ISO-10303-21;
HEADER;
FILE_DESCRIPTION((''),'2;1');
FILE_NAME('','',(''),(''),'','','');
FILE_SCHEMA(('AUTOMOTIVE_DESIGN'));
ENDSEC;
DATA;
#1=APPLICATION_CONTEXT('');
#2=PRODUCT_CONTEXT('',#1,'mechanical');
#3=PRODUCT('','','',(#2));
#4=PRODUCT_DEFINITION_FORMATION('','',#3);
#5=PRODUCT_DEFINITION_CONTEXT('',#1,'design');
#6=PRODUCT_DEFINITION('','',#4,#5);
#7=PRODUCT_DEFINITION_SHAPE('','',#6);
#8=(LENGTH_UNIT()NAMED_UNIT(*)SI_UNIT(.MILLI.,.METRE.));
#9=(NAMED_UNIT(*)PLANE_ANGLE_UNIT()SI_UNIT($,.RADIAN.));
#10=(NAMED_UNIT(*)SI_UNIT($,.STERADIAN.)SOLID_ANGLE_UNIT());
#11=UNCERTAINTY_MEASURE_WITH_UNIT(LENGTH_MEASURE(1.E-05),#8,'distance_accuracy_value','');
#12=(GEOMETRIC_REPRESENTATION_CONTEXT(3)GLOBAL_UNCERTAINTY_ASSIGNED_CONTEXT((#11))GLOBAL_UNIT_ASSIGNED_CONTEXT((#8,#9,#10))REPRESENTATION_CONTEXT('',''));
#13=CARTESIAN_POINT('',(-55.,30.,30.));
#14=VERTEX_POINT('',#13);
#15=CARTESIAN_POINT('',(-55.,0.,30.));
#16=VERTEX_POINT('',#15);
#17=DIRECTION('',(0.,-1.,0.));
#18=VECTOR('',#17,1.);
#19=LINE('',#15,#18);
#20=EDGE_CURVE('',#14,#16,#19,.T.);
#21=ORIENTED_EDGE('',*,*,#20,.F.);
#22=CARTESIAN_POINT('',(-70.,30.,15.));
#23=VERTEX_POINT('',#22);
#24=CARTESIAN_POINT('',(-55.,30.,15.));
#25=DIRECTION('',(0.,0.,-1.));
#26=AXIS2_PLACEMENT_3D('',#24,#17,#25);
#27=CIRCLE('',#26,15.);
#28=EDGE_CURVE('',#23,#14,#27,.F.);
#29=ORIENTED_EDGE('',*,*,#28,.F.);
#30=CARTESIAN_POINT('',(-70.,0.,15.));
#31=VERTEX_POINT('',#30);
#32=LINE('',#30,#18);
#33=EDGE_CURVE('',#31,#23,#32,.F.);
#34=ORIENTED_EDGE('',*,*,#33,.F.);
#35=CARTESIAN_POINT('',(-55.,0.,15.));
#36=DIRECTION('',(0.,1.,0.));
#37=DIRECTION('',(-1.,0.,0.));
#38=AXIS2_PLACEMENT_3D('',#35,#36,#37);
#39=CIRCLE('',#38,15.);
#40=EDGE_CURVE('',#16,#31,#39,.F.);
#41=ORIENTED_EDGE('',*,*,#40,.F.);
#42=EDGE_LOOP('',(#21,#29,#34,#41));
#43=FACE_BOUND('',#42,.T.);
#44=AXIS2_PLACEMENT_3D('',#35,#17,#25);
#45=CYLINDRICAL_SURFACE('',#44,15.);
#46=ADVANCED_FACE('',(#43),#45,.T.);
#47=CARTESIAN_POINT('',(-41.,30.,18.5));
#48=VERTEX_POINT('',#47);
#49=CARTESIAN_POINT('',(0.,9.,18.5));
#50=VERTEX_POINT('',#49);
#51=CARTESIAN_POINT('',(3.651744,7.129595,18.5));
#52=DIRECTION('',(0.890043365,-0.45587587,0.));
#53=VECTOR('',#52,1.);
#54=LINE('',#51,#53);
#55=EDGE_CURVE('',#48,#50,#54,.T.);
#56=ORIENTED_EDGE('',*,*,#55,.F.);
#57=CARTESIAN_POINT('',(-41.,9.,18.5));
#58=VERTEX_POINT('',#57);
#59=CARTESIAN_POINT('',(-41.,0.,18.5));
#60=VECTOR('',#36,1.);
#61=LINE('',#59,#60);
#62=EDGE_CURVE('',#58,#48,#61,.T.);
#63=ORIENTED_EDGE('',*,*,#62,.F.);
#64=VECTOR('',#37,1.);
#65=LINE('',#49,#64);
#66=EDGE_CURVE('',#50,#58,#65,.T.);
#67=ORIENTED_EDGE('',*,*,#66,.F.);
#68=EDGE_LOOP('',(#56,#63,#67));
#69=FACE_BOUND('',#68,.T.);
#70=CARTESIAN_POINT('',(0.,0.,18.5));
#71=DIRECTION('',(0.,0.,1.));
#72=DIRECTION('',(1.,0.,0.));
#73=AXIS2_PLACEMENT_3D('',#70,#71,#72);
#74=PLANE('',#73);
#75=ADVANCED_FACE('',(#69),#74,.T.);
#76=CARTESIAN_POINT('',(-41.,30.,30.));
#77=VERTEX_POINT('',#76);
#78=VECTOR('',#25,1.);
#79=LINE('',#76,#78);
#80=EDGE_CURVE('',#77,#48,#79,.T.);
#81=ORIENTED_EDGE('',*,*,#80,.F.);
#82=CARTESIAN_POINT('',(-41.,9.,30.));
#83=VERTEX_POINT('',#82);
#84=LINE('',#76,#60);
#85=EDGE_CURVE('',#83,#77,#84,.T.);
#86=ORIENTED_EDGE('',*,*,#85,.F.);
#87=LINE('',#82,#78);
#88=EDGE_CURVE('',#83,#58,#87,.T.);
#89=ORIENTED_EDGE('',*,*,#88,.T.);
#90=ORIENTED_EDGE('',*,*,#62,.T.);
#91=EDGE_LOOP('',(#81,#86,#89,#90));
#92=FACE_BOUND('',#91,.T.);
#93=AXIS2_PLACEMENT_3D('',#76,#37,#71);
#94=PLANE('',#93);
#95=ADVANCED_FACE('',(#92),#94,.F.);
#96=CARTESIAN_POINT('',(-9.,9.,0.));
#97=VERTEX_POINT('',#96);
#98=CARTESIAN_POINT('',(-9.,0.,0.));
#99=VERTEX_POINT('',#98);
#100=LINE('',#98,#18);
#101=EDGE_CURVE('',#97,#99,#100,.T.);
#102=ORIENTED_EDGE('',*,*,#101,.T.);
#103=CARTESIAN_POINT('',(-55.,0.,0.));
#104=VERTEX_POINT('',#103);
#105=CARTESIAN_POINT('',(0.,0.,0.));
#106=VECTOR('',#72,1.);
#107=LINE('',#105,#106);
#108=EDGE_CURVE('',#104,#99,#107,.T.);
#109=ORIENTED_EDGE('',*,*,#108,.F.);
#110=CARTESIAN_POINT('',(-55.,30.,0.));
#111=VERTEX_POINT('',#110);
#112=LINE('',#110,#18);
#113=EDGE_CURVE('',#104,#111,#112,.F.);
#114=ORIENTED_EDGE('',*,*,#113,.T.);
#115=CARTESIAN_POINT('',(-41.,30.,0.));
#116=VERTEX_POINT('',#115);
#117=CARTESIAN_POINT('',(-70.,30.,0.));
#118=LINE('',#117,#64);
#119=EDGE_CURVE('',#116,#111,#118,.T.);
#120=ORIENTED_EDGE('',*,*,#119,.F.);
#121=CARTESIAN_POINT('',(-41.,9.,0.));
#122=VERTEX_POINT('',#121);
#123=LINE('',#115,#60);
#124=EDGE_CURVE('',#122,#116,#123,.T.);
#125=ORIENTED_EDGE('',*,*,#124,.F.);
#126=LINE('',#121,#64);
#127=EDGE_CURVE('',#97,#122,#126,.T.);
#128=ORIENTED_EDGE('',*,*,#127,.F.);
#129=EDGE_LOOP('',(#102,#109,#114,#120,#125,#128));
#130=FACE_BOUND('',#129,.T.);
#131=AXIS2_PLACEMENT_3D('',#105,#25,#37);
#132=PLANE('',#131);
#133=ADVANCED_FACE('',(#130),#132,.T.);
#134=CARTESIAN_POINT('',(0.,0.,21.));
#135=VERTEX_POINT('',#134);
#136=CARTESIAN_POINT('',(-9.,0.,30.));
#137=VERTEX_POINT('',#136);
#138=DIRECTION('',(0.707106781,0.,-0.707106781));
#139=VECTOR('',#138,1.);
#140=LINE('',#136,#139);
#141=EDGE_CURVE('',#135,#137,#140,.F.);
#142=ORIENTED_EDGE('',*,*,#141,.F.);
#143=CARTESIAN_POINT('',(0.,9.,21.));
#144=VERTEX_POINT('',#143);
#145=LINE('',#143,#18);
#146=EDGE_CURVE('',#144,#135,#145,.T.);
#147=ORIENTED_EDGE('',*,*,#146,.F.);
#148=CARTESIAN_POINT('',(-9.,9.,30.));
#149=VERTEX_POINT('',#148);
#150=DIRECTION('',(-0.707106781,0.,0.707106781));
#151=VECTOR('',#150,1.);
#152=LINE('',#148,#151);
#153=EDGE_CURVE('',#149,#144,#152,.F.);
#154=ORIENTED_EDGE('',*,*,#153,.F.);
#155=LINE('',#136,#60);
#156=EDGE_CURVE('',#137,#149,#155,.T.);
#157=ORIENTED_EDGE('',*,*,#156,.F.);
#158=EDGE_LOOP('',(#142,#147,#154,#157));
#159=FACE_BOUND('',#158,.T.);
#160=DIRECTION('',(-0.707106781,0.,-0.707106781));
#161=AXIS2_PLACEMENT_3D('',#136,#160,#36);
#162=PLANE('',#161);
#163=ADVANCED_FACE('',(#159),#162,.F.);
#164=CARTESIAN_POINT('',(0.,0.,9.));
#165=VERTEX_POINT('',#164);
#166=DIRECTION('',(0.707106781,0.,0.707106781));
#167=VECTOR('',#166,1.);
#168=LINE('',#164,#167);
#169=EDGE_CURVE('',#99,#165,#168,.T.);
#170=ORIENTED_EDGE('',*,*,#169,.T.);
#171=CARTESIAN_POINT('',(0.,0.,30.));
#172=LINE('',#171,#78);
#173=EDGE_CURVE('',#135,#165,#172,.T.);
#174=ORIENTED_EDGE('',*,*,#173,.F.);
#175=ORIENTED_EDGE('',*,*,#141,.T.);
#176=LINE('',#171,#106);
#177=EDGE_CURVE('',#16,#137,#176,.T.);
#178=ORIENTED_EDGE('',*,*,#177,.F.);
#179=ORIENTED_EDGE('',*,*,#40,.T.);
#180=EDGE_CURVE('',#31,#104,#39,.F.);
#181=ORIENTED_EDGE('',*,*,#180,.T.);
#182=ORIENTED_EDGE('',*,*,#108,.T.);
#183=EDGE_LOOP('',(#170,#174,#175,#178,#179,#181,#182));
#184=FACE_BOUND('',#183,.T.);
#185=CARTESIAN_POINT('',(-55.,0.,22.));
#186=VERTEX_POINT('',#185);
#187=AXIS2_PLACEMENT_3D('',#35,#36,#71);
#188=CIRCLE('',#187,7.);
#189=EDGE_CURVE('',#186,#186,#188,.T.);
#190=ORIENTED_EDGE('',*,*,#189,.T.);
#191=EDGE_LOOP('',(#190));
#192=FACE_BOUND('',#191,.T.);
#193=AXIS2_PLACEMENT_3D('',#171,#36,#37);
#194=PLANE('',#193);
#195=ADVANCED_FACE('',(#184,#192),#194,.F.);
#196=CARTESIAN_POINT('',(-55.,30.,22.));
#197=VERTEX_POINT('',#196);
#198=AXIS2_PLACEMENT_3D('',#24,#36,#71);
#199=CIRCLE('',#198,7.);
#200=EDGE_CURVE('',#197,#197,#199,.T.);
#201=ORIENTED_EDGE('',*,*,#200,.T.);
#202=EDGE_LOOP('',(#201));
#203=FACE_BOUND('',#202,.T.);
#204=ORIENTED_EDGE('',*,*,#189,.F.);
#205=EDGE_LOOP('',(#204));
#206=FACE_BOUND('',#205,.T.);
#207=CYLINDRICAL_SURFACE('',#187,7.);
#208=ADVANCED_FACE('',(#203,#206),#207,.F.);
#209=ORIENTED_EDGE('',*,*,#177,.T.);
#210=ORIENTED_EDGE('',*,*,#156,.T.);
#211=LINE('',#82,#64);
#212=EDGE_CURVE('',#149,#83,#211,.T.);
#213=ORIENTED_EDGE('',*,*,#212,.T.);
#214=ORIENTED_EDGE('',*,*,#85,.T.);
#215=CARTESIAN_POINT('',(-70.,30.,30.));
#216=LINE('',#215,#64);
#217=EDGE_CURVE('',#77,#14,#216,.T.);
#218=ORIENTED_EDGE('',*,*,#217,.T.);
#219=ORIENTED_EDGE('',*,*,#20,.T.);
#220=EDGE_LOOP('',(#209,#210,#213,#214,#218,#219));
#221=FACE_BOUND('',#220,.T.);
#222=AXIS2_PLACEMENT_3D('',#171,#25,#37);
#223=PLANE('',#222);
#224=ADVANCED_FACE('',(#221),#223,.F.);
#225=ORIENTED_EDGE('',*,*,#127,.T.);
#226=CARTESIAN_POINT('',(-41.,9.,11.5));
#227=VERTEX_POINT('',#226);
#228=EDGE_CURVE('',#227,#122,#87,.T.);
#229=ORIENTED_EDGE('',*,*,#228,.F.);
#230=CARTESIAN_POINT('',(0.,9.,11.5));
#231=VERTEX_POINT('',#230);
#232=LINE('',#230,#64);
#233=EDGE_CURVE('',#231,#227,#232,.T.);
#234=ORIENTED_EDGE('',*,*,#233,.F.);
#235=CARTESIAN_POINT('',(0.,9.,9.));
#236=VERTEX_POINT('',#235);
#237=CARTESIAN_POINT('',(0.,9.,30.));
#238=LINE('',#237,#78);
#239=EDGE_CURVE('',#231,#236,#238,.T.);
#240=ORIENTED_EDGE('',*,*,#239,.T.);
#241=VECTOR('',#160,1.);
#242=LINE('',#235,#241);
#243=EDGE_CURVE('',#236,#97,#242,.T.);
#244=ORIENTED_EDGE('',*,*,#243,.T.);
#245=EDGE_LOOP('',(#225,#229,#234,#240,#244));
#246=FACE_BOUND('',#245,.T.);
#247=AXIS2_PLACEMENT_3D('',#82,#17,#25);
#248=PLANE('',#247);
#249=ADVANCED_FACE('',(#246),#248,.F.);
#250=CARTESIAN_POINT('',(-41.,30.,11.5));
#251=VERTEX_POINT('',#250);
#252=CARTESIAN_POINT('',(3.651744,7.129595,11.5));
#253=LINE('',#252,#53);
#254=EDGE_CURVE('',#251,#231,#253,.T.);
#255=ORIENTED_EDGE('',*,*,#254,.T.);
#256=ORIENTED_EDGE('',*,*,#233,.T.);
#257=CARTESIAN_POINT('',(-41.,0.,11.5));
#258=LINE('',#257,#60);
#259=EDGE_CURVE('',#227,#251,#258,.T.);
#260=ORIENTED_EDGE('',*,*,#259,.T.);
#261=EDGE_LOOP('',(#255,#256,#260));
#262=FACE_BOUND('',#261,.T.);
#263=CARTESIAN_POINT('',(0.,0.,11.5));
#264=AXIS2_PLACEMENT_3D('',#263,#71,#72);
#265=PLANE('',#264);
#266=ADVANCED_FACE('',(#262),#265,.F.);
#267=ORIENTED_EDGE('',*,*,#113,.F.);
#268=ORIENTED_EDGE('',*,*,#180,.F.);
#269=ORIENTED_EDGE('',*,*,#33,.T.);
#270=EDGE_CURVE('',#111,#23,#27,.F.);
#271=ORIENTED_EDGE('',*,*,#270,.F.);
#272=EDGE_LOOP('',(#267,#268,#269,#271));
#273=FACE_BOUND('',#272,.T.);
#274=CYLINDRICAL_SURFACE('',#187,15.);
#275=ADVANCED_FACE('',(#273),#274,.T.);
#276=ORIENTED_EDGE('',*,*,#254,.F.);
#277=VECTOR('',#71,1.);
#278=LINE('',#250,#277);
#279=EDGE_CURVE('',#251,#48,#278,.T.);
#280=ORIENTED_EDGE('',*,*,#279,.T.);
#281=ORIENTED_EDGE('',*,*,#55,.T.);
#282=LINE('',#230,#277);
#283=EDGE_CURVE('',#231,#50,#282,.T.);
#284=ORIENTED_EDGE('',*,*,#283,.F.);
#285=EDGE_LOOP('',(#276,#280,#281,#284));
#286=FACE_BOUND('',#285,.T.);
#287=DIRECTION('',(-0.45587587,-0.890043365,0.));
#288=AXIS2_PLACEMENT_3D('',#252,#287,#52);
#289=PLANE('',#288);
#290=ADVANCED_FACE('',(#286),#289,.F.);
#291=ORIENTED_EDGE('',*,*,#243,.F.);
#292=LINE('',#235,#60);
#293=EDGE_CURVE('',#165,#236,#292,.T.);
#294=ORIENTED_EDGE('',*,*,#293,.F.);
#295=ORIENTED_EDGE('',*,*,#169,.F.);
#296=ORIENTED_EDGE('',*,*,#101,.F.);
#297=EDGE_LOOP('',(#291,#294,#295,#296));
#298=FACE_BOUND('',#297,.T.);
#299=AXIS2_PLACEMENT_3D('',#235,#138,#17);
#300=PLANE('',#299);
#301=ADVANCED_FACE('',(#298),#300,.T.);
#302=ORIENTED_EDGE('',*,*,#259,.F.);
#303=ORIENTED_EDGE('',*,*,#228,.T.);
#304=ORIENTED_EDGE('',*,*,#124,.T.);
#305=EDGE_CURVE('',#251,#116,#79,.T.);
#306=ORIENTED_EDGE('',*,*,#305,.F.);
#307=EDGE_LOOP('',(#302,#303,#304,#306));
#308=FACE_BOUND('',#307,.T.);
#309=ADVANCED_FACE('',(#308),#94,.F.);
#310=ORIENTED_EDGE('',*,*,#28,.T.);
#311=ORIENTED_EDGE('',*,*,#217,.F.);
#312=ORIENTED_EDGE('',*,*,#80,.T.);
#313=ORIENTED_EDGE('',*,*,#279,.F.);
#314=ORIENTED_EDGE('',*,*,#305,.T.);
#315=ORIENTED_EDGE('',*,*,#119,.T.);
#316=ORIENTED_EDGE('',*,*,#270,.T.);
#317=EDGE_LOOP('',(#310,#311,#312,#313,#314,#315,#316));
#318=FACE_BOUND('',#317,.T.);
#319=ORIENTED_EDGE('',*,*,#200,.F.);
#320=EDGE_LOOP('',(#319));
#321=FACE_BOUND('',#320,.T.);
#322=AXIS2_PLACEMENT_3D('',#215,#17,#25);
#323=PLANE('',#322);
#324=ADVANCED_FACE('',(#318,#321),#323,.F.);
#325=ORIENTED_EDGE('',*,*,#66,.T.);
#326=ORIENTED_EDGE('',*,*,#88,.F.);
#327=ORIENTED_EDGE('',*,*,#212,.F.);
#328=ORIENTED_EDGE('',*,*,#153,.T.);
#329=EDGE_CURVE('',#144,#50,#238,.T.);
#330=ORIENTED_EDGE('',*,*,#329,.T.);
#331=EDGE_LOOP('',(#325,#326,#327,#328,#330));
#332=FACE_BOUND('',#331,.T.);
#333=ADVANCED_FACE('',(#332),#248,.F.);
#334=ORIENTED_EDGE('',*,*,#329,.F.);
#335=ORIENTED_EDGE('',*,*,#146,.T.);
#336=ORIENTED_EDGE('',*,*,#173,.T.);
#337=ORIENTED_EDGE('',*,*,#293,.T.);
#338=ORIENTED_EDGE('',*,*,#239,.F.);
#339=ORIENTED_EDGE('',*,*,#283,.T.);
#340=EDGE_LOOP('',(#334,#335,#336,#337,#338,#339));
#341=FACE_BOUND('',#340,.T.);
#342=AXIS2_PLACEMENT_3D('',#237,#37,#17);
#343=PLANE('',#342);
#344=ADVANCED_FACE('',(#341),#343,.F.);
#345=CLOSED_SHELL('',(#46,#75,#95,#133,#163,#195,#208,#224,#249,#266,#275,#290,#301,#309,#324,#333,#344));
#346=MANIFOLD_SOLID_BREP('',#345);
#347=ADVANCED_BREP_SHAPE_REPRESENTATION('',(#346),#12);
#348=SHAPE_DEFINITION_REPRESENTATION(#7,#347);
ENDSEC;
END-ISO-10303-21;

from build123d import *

# Parameters (mm, degrees)
EXTRUDE_1_DEPTH     = 30
FILLET_1_R          = 15
SKETCH_2_R          = 7
CUT_EXTRUDE_1_DEPTH = 82.853527719
EXTRUDE_START       = -11.5
EXTRUDE_3_DEPTH     = 7
CHAMFER_1_SIZE      = 9


with BuildPart() as part:
    # 스케치1 → 보스-돌출1 (new body)
    with BuildSketch(Plane.XY):
        Polygon((0, 0), (-70, 0), (-70, 30), (-41, 30), (-41, 9), (0, 9), align=None)
    extrude(amount=EXTRUDE_1_DEPTH)

    # 필렛1
    fillet_1_edges = [part.edges().sort_by_distance(p)[0] for p in [
        (-70, 15, 0),
        (-70, 15, 30),
    ]]
    fillet(fillet_1_edges, radius=FILLET_1_R - 0.0001)  # a hair under: the kernel refuses the full size

    # 스케치2 → 컷-돌출1 (cut, through all)
    with BuildSketch(Plane(origin=(0, 30, 0), x_dir=(1, 0, 0), z_dir=(0, 1, 0))):
        with Locations(Location((-55, -15, 0), (0, 0, 270))):
            Circle(SKETCH_2_R)
    extrude(amount=-CUT_EXTRUDE_1_DEPTH, mode=Mode.SUBTRACT)

    # 스케치3 → 보스-돌출3 (add)
    with BuildSketch(Plane.XY.offset(30).offset(EXTRUDE_START)):
        Polygon((0, 9), (-41, 30), (-41, 9), align=None)
    extrude(amount=-EXTRUDE_3_DEPTH)

    # 모따기1
    chamfer_1_edges = [part.edges().sort_by_distance(p)[0] for p in [
        (0, 4.5, 30),
        (0, 4.5, 0),
    ]]
    chamfer(chamfer_1_edges, length=CHAMFER_1_SIZE)


solid = part.part
